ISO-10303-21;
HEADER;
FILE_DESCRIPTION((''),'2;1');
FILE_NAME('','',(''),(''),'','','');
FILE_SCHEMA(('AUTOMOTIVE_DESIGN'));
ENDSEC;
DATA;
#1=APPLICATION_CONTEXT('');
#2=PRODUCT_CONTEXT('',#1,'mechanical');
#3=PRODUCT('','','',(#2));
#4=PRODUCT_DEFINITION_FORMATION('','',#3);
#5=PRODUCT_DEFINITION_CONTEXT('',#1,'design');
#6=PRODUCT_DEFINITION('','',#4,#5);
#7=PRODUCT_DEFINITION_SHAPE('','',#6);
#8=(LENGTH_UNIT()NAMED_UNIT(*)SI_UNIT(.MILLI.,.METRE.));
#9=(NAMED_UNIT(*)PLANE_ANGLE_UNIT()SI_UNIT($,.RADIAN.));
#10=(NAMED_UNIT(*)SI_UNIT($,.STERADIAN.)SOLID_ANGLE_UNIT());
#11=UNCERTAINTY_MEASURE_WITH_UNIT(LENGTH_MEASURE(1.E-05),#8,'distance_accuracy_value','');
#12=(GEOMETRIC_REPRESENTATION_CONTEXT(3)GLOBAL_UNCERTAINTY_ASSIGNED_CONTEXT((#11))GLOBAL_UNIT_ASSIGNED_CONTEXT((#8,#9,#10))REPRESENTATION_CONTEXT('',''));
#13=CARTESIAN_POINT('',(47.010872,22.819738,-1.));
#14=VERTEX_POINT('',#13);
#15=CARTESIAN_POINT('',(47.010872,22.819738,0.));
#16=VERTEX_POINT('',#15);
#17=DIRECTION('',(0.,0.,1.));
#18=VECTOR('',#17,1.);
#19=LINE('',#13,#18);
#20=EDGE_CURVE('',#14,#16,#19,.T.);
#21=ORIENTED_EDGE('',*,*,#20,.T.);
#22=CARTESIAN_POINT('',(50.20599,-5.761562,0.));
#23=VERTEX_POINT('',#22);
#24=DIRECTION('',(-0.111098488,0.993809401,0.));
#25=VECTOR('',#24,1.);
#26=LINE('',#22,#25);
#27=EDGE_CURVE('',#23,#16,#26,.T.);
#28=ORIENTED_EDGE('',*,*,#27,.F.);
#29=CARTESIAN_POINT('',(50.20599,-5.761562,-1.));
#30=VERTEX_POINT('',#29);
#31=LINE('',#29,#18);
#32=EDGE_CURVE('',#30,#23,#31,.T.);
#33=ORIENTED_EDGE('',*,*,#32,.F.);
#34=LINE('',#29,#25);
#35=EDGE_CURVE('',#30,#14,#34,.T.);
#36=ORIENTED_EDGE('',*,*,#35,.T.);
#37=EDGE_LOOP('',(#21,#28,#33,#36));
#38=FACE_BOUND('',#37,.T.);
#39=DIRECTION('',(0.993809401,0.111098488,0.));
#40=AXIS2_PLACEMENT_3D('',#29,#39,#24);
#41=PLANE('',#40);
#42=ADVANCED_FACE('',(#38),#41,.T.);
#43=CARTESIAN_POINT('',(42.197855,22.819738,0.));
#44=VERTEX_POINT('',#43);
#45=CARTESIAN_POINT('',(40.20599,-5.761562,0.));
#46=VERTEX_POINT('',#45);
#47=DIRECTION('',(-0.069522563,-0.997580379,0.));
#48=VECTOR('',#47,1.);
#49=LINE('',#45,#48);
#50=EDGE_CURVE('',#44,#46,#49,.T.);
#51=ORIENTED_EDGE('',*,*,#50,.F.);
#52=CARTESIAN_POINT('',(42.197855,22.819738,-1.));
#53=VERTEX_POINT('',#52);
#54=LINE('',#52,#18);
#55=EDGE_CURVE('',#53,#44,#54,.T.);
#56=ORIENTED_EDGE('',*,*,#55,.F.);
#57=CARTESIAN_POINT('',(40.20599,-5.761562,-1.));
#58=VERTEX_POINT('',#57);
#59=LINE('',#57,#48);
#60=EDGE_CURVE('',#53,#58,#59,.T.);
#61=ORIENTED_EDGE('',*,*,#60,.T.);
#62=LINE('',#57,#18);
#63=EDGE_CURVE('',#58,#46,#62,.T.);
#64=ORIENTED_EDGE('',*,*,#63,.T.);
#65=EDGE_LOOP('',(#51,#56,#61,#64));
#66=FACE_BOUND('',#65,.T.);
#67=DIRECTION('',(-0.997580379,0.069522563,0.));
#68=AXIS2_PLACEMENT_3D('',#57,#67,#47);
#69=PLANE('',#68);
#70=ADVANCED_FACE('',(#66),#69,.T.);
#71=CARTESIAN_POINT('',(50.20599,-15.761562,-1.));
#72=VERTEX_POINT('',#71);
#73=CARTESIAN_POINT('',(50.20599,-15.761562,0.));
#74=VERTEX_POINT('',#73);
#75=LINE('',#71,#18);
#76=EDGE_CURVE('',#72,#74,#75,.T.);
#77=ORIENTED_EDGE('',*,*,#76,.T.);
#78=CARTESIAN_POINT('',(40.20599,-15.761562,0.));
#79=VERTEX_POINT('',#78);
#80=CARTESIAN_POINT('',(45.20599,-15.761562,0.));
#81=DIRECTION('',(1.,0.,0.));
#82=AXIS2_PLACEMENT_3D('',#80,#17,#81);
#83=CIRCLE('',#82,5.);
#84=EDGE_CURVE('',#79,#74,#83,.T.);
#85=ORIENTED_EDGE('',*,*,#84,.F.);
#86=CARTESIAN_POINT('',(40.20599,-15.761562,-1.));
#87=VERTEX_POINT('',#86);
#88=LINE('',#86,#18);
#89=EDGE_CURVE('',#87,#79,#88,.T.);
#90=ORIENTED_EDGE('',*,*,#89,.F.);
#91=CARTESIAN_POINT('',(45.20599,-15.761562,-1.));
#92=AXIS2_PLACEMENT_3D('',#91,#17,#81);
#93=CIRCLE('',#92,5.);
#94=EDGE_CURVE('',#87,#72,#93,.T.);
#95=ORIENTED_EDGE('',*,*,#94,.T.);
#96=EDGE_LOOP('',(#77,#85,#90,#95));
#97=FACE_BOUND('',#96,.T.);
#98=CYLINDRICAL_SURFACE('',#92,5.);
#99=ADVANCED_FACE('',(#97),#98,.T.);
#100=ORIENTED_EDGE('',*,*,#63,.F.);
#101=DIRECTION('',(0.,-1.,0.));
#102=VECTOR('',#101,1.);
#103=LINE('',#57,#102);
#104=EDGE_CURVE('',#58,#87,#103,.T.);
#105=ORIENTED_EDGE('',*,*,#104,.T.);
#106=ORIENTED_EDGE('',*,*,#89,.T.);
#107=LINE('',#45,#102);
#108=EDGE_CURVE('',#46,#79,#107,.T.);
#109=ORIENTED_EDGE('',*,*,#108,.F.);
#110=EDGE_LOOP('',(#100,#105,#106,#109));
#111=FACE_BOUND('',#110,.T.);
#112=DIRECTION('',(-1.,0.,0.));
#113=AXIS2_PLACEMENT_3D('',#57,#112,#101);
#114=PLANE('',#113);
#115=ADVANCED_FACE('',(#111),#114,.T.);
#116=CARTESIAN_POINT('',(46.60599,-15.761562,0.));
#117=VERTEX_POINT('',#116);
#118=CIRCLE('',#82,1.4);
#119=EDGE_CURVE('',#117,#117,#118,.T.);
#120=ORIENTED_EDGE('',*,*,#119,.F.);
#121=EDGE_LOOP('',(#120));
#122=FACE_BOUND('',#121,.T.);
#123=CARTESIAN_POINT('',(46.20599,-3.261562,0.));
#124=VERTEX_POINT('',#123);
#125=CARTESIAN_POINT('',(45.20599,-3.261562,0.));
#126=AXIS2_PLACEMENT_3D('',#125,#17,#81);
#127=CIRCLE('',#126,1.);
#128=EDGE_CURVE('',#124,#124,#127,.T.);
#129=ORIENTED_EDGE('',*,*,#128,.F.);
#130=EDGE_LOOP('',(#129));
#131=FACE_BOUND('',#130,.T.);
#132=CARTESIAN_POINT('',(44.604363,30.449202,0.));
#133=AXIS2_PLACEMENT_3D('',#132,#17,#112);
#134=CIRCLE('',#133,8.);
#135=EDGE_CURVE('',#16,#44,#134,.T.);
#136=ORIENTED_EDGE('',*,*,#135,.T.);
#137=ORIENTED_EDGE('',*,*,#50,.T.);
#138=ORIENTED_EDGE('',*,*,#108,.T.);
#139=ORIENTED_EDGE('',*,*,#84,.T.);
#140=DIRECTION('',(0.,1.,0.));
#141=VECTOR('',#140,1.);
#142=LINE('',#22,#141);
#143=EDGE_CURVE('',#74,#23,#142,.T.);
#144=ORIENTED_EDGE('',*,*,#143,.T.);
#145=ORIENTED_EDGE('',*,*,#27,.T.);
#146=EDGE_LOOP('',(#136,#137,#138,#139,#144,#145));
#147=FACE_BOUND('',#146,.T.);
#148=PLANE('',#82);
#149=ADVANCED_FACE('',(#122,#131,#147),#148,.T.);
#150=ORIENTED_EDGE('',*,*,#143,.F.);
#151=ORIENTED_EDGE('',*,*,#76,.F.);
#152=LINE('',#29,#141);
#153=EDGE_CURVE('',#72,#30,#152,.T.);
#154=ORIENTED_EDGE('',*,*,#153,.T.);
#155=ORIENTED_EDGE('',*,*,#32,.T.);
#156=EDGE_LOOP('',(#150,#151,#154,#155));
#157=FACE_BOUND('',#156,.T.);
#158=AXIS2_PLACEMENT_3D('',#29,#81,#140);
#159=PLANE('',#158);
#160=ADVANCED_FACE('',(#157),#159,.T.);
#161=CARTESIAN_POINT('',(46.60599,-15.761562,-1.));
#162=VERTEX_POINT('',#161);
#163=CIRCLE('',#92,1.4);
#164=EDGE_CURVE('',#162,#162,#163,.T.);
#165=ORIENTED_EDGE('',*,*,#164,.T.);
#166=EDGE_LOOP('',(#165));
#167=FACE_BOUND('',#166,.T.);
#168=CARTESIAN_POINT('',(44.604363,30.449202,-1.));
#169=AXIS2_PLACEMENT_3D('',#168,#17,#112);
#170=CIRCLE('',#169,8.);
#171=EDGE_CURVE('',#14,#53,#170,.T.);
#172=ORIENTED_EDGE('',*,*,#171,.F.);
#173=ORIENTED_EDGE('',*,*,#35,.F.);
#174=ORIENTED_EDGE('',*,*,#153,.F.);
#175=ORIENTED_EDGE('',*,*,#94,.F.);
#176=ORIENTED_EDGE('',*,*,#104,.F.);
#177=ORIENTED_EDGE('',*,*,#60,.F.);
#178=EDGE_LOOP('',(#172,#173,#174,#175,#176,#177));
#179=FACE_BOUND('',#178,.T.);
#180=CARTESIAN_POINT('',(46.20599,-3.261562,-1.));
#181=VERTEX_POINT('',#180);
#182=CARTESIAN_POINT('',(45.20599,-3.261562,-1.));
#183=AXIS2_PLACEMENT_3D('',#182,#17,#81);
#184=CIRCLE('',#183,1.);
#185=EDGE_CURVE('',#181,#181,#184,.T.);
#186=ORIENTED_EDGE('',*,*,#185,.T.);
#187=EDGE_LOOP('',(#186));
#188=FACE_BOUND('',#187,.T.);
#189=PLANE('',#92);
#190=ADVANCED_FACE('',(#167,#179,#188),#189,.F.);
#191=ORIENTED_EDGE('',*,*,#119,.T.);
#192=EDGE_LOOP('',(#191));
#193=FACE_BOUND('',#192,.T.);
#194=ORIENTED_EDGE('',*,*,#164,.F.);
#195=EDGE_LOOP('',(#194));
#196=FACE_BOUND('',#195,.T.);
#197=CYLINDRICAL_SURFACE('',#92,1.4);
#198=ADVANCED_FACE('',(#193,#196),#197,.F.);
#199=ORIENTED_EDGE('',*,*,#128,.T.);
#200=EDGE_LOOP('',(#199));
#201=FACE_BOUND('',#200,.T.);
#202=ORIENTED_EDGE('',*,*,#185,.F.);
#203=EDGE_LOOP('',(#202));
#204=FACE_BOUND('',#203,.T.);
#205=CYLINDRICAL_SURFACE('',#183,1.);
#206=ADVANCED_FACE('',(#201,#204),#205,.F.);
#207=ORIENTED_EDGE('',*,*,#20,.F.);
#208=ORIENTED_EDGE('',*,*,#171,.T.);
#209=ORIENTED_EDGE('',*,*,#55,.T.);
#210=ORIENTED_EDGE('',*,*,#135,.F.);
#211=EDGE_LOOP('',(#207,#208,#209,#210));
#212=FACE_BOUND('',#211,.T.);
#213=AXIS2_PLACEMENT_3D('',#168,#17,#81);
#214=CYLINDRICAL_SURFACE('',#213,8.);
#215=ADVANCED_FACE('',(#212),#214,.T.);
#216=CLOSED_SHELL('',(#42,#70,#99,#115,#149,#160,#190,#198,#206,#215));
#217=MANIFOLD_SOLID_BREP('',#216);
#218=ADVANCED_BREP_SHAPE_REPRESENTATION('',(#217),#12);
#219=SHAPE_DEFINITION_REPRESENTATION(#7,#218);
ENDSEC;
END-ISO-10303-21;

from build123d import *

# Parameters (mm, degrees)
MODEL_R           = 1.4
MODEL_R_2         = 1
BRIDA_BASE1_DEPTH = 1


# Sheet-metal steps are written as plain solids
with BuildPart() as part:
    # Model → Brida base1 (new body)
    with BuildSketch(Plane.XY):
        with BuildLine():
            Line((40.2059904, -5.7615616), (42.197855138, 22.819737764))
            ThreePointArc((42.197855138, 22.819737764), (44.604363348, 38.449201588), (47.010871557, 22.819737764))
            Line((47.010871557, 22.819737764), (50.2059904, -5.7615616))
            Line((50.2059904, -5.7615616), (50.2059904, -15.7615616))
            ThreePointArc((50.2059904, -15.7615616), (45.2059904, -20.7615616), (40.2059904, -15.7615616))
            Line((40.2059904, -15.7615616), (40.2059904, -5.7615616))
        make_face()
        with Locations((45.2059904, -15.7615616)):
            Circle(MODEL_R, mode=Mode.SUBTRACT)
        with Locations((45.2059904, -3.2615616)):
            Circle(MODEL_R_2, mode=Mode.SUBTRACT)
    extrude(amount=-BRIDA_BASE1_DEPTH)


solid = part.part
